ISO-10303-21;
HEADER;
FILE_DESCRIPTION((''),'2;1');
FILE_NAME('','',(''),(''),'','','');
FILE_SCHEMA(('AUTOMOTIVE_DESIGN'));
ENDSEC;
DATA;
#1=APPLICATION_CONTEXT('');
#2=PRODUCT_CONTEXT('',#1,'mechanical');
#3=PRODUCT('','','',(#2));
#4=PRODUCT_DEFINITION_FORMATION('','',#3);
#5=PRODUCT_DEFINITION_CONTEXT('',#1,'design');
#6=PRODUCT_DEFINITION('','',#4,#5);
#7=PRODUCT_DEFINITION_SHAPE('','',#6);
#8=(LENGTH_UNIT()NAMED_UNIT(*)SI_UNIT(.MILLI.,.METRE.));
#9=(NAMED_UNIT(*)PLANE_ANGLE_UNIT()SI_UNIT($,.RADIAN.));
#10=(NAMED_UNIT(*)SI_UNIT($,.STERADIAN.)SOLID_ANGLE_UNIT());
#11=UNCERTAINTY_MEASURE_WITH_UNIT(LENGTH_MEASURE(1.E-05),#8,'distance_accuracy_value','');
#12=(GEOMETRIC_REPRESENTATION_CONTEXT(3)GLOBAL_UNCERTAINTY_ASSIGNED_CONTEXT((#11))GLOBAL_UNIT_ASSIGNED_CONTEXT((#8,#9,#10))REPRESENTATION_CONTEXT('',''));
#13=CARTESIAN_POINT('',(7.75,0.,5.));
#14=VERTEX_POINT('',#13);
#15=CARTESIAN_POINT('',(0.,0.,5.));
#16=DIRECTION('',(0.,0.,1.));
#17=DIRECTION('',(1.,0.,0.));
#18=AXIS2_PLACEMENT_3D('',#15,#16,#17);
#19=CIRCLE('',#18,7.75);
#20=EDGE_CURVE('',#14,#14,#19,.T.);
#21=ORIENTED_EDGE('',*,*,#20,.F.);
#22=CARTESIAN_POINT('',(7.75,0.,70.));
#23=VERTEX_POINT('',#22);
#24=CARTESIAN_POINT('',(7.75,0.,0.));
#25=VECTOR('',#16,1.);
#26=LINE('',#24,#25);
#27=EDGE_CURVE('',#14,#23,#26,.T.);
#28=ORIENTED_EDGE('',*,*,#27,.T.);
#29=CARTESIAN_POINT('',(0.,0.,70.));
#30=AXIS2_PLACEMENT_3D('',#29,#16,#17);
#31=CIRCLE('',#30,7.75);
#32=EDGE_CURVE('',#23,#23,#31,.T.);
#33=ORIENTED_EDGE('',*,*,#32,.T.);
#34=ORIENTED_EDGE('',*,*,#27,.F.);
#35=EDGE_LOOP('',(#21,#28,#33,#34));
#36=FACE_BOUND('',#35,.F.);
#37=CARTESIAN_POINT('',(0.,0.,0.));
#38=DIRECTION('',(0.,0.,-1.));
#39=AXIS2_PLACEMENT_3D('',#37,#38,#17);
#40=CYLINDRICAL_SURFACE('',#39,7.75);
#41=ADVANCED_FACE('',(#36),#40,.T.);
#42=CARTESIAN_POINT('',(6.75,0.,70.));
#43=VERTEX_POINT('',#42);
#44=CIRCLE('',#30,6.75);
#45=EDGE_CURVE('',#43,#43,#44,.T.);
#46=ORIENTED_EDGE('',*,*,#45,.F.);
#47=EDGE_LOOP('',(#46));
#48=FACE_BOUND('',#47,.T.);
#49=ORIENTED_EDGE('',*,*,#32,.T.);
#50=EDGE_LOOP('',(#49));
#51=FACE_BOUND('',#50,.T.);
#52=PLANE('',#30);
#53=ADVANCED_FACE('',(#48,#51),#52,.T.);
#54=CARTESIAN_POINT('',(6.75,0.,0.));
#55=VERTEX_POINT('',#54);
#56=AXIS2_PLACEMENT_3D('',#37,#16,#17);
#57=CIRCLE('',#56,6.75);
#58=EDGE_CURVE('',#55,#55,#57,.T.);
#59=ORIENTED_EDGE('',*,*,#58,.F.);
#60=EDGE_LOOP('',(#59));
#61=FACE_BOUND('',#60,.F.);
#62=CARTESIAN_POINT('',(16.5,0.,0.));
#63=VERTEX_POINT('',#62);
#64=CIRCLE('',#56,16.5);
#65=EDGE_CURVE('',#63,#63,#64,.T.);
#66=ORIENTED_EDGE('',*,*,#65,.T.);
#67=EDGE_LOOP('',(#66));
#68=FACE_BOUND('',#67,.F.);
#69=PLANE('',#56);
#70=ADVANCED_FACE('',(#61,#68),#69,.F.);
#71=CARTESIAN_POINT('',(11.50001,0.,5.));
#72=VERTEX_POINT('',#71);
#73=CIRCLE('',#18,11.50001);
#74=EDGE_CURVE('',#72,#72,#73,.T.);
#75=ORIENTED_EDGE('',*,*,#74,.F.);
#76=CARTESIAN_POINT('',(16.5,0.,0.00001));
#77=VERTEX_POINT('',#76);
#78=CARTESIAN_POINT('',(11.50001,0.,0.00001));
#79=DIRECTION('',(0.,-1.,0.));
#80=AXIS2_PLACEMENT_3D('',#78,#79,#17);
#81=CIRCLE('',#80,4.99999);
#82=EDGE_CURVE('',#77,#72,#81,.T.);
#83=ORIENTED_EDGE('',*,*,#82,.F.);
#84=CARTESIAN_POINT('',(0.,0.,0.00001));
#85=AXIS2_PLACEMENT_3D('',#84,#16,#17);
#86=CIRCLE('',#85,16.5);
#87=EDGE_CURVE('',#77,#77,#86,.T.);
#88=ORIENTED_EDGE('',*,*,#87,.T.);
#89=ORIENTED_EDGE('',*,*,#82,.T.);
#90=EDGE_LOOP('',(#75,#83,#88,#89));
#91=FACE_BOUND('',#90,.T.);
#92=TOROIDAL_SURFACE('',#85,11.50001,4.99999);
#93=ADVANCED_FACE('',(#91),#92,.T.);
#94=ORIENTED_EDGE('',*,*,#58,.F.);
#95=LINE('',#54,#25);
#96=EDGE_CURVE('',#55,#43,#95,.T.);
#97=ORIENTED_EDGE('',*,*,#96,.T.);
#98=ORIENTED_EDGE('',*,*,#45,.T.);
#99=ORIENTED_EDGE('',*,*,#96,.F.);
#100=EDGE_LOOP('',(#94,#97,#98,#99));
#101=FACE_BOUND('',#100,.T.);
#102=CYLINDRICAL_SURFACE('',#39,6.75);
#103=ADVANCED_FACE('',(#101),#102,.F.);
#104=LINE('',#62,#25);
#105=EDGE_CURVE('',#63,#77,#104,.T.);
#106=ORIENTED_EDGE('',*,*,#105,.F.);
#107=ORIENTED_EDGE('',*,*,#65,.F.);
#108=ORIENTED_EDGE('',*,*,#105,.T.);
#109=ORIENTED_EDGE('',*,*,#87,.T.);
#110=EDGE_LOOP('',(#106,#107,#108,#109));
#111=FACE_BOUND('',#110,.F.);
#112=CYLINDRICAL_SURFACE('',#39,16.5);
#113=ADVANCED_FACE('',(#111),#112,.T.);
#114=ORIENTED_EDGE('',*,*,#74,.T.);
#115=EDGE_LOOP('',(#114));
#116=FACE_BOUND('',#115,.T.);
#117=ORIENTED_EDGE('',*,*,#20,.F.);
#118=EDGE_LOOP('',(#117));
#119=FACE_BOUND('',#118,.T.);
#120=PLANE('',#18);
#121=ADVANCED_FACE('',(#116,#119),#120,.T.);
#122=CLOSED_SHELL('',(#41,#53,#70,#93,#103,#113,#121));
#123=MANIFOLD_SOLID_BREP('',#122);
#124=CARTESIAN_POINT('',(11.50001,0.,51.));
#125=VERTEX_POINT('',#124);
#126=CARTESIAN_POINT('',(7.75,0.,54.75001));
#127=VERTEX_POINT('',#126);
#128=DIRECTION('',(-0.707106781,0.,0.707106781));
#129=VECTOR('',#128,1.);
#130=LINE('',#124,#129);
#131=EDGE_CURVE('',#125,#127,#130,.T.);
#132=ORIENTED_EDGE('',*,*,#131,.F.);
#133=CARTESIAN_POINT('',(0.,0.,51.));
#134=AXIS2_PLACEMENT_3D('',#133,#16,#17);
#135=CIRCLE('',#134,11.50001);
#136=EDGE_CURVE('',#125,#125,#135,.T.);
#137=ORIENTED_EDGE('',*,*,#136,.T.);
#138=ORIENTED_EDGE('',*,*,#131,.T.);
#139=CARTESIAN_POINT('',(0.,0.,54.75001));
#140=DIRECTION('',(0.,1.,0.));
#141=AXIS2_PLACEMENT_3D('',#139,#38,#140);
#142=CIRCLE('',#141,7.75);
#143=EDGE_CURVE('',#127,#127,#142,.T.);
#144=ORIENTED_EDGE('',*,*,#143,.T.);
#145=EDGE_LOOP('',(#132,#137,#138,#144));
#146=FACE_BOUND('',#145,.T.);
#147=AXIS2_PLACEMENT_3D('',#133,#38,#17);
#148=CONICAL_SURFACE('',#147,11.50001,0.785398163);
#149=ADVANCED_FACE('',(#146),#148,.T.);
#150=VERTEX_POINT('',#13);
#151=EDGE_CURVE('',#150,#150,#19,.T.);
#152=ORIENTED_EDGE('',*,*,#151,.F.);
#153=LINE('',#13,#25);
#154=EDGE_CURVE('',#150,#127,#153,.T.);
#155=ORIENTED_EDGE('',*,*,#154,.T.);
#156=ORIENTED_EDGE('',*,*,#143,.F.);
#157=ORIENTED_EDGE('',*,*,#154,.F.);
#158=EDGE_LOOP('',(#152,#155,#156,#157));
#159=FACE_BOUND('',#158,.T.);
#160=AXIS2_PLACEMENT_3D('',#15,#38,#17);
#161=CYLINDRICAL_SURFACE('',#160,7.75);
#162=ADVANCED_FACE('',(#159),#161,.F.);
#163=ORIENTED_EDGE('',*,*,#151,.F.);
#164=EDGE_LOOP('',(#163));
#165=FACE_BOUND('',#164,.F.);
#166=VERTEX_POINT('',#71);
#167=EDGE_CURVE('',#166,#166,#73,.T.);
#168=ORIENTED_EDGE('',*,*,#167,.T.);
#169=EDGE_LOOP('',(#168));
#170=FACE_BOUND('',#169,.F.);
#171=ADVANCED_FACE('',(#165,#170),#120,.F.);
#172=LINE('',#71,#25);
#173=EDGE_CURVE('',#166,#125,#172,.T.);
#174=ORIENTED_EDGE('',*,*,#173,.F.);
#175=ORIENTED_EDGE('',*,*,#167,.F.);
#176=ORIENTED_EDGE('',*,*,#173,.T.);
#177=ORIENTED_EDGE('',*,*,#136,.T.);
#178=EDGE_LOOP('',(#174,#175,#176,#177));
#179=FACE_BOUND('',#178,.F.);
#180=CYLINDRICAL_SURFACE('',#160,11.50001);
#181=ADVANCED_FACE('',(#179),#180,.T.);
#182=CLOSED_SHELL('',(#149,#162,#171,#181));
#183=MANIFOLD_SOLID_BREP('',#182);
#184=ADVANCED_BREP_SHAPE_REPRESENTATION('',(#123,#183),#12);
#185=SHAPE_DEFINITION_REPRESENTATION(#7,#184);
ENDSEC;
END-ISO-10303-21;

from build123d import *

# Parameters (mm, degrees)
F0_R     = 16.5
F0_R_2   = 15.5
F0_R_3   = 7.75
F1_DEPTH = 5
F2_R     = 4.99999
F3_DEPTH = 51
F0_R_4   = 6.75
F5_DEPTH = 70


# Not quite as in the source:
# - a fillet or chamfer that OpenCascade refuses, or shapes differently, is made with other operations: its cross-section is extruded or revolved along the edge and cut away or added
# - a fillet or chamfer is up to 0.001 mm smaller than in the source, because OpenCascade refuses the exact size


with BuildPart() as f1:
    # F0 (on Top) → F1 (new body)
    with BuildSketch(Plane.XY):
        Circle(F0_R)
        Circle(F0_R_2, mode=Mode.SUBTRACT)
        Circle(F0_R_2)
        Circle(F0_R_3, mode=Mode.SUBTRACT)
    extrude(amount=F1_DEPTH)

    # F2 (radius 5 in the source; OpenCascade refuses exactly that, so slightly less here)
    f2_edges = [f1.edges().sort_by_distance(p)[0] for p in [
        (-16.5, 0, 5),
    ]]
    fillet(f2_edges, radius=F2_R)


with BuildPart() as f3:
    # F3 (new): a face of the model
    f3_faces = [f1.part.faces().sort_by_distance(p)[0] for p in [
        (-11.1747405978, 0, 5),
    ]]
    extrude(f3_faces, amount=F3_DEPTH)

    # F4: chamfer of 5 on 1 edges, made by hand

    # F4_s1 → F4_t2 (revolve, cut)
    with BuildSketch(Plane.XZ):
        Polygon((11.50001, 51), (6.50001, 56), (11.50001, 56), align=None)
    revolve(axis=Axis((0, 0, 56), (0, 0, 1)), mode=Mode.SUBTRACT)


with BuildPart() as f1_1:
    add(f1.part)

    # F0 (on Top) → F5 (join)
    with BuildSketch(Plane.XY):
        Circle(F0_R_3)
        Circle(F0_R_4, mode=Mode.SUBTRACT)
    extrude(amount=F5_DEPTH)


solid = Compound([f3.part, f1_1.part])
